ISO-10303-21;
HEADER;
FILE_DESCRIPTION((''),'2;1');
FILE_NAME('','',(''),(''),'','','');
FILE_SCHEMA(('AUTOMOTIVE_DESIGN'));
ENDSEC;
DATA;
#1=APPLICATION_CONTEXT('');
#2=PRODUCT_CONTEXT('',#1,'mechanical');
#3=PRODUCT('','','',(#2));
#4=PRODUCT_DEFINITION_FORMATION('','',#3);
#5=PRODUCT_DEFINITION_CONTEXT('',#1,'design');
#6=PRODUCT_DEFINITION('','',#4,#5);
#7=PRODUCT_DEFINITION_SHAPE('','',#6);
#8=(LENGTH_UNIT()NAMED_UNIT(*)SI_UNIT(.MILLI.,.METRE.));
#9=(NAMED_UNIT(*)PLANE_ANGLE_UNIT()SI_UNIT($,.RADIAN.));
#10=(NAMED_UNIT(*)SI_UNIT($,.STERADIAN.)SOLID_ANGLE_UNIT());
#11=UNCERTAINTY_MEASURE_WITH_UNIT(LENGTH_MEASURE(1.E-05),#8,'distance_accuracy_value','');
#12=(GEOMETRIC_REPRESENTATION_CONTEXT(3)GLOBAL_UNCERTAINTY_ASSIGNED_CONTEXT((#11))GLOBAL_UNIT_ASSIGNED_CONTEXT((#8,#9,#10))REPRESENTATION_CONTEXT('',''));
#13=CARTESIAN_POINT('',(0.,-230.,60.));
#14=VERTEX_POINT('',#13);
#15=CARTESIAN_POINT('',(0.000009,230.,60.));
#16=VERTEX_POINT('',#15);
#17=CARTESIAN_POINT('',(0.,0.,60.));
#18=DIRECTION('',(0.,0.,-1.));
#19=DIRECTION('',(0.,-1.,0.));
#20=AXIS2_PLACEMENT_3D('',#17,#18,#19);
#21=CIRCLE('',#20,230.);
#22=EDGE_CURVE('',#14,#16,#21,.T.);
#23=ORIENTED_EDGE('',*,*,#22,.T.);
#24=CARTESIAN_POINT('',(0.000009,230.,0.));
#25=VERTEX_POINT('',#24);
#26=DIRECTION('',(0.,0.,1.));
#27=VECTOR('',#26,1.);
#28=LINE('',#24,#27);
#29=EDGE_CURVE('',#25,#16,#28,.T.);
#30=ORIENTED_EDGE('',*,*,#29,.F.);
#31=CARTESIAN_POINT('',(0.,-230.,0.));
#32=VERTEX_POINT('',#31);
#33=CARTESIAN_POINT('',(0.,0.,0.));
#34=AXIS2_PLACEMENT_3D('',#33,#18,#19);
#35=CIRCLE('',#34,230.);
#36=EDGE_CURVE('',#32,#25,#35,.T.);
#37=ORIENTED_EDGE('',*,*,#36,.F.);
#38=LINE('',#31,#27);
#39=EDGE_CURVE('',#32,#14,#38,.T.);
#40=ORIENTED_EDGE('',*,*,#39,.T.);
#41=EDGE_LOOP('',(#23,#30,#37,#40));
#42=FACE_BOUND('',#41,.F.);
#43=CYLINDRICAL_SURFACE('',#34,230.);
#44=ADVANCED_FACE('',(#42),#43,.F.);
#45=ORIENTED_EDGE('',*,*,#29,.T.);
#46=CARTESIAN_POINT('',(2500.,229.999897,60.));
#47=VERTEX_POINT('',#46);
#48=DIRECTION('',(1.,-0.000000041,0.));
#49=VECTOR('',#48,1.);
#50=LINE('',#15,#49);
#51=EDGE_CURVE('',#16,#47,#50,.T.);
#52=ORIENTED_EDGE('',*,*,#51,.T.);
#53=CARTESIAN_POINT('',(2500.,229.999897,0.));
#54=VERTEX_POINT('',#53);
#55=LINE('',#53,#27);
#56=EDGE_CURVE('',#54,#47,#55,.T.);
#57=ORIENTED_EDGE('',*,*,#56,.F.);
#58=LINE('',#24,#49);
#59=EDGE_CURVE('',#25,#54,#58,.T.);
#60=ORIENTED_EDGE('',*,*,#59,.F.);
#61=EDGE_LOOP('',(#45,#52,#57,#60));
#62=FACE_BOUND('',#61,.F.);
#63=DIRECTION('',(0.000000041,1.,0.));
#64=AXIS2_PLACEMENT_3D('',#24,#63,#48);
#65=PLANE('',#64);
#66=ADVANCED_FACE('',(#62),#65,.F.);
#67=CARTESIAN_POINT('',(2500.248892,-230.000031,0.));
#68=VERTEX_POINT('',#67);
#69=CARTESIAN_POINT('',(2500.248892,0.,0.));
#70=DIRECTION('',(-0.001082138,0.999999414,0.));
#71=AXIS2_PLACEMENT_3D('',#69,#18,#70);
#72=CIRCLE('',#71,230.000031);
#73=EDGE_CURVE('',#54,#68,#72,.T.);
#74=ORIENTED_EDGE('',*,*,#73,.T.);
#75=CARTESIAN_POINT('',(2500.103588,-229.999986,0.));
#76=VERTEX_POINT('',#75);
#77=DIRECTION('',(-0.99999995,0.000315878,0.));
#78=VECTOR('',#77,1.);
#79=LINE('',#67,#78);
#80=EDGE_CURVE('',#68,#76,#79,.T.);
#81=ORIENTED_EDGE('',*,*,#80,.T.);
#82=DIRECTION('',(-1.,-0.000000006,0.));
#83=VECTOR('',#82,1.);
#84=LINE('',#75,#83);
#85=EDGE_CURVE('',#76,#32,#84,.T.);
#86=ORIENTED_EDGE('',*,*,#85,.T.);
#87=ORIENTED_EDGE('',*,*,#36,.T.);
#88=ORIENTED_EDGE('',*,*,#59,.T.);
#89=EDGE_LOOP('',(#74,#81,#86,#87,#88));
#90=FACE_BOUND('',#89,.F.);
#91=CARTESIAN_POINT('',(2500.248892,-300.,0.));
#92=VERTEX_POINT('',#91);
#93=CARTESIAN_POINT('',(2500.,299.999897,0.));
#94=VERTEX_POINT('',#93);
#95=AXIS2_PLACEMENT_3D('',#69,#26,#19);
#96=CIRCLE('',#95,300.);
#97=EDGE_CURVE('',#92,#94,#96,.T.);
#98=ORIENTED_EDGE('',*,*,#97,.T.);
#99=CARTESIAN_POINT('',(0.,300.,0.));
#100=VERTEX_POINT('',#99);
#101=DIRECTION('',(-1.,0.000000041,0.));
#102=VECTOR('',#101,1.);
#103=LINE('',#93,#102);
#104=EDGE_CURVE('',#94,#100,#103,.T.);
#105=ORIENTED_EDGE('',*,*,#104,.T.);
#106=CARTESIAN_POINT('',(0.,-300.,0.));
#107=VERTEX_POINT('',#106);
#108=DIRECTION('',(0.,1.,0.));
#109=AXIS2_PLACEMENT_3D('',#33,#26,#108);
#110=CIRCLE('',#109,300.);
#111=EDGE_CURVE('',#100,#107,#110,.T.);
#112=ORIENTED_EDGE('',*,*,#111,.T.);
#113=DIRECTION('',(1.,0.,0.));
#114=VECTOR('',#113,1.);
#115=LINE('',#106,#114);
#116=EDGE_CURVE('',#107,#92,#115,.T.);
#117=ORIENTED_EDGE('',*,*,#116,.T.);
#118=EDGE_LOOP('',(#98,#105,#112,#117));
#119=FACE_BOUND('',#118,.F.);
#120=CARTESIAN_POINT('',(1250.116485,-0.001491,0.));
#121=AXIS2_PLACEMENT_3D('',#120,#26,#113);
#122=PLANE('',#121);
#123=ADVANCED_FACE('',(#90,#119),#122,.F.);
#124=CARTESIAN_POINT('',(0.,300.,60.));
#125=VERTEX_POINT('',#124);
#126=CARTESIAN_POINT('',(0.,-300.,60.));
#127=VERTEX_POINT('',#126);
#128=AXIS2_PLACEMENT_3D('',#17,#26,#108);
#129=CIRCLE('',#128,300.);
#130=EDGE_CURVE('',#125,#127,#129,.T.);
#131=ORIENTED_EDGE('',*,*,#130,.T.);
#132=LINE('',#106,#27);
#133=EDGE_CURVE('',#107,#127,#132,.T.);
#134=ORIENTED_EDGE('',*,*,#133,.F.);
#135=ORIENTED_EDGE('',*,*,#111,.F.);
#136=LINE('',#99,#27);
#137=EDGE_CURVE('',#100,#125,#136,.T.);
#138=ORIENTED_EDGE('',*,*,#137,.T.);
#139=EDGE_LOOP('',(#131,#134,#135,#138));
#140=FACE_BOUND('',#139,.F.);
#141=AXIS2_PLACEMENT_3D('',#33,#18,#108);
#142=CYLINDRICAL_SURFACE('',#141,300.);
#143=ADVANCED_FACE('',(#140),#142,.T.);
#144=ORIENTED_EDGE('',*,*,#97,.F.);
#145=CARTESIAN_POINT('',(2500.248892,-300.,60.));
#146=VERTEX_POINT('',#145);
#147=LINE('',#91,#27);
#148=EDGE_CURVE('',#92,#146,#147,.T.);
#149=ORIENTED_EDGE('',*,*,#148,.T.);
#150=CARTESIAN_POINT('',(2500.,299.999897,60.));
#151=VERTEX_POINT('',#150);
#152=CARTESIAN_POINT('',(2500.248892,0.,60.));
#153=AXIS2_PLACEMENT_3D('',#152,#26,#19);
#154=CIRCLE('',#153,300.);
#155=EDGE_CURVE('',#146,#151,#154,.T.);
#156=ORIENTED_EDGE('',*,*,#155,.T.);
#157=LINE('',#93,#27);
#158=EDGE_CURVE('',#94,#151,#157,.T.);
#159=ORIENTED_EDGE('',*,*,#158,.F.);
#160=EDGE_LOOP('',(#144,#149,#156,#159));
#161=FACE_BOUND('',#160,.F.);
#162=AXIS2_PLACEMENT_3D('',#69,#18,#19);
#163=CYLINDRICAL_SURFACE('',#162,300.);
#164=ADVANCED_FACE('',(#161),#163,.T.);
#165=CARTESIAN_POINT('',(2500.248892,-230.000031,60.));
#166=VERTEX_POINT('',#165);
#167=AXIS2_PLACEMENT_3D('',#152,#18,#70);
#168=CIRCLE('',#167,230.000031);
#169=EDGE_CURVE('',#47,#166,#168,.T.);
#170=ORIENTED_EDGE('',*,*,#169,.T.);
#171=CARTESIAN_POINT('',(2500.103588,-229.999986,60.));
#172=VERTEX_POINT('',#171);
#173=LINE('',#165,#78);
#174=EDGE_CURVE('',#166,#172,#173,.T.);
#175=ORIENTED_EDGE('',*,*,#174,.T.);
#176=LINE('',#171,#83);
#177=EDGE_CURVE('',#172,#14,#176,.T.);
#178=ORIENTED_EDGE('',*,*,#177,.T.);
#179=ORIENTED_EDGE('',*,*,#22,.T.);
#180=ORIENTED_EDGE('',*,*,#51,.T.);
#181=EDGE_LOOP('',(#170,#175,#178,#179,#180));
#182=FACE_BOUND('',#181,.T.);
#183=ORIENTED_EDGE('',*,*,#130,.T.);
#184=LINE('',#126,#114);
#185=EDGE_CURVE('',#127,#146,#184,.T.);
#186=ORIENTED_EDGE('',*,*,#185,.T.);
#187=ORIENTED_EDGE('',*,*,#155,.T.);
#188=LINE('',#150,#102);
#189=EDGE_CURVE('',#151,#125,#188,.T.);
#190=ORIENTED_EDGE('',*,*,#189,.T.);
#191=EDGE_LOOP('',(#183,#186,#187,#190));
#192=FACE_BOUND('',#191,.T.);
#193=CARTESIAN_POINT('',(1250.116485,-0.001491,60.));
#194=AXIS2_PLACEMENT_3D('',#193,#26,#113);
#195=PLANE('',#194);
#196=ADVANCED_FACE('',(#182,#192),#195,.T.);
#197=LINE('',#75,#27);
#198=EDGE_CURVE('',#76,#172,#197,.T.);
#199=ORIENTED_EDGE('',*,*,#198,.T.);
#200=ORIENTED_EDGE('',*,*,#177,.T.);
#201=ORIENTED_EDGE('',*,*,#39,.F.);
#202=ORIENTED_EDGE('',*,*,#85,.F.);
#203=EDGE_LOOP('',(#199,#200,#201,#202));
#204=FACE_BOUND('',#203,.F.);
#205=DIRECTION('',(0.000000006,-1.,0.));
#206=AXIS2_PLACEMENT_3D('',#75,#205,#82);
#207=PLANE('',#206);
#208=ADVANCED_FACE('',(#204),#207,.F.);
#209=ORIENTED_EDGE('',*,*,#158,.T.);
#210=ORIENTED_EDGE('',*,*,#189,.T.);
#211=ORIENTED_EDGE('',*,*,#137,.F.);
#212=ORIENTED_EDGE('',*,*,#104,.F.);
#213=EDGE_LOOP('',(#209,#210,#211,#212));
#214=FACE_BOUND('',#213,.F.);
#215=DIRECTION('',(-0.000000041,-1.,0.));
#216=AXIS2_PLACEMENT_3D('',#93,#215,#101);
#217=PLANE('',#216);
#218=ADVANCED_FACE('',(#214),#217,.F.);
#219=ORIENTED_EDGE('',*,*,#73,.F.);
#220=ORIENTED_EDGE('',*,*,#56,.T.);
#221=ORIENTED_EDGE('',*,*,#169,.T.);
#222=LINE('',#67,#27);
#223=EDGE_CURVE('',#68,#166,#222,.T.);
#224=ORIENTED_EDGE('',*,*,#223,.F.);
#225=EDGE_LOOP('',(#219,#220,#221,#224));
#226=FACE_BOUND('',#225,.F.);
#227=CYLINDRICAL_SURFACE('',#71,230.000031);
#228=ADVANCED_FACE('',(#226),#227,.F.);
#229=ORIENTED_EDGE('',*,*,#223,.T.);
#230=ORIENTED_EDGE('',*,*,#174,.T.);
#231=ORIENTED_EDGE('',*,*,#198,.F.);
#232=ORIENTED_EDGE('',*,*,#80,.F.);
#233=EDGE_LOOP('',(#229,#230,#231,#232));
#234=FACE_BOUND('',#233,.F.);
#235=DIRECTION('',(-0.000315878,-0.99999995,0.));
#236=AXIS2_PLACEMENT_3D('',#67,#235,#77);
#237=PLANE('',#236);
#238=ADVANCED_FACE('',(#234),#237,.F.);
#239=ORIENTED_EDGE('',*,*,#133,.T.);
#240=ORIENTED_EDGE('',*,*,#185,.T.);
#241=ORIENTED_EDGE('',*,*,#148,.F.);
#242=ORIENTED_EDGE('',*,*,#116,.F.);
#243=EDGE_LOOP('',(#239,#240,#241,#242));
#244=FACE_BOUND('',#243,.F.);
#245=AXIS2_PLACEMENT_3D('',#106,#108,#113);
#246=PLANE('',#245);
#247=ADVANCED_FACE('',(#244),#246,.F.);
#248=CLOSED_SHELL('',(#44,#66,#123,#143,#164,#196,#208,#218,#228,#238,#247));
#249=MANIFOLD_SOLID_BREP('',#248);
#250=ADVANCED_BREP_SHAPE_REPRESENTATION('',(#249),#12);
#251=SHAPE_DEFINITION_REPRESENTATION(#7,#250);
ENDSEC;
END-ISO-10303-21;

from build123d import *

# Parameters (mm, degrees)
F1_DEPTH = 60


# Not quite as in the source:
# - ends of sketch curves that miss each other by under 0.0002 mm in the source are joined


with BuildPart() as f1:
    # F0 (on Top) → F1 (new body)
    with BuildSketch(Plane.XY):
        with BuildLine():
            Line((2500, 299.9998967548), (0, 300))
            ThreePointArc((0, 300), (-300, 6.1947e-06), (0, -300))
            Line((0, -300), (2500.2488918055, -300))
            ThreePointArc((2500.2488918055, -300), (2800.2488659941, 0.1244459134), (2500, 299.9998967548))
        make_face()
        with BuildLine():
            ThreePointArc((0, -230), (-230, 4.7493e-06), (9.4986e-06, 230))
            Line((9.4986e-06, 230), (2500, 229.9998967548))
            ThreePointArc((2500, 229.9998967548), (2730.248889561, 0.1244459209), (2500.2488918055, -230.0000314225))
            Line((2500.2488918055, -230.0000314225), (2500.1035879766, -229.9999855242))
            Line((2500.1035879766, -229.9999855242), (0, -230))
        make_face(mode=Mode.SUBTRACT)
    extrude(amount=F1_DEPTH)


solid = f1.part
